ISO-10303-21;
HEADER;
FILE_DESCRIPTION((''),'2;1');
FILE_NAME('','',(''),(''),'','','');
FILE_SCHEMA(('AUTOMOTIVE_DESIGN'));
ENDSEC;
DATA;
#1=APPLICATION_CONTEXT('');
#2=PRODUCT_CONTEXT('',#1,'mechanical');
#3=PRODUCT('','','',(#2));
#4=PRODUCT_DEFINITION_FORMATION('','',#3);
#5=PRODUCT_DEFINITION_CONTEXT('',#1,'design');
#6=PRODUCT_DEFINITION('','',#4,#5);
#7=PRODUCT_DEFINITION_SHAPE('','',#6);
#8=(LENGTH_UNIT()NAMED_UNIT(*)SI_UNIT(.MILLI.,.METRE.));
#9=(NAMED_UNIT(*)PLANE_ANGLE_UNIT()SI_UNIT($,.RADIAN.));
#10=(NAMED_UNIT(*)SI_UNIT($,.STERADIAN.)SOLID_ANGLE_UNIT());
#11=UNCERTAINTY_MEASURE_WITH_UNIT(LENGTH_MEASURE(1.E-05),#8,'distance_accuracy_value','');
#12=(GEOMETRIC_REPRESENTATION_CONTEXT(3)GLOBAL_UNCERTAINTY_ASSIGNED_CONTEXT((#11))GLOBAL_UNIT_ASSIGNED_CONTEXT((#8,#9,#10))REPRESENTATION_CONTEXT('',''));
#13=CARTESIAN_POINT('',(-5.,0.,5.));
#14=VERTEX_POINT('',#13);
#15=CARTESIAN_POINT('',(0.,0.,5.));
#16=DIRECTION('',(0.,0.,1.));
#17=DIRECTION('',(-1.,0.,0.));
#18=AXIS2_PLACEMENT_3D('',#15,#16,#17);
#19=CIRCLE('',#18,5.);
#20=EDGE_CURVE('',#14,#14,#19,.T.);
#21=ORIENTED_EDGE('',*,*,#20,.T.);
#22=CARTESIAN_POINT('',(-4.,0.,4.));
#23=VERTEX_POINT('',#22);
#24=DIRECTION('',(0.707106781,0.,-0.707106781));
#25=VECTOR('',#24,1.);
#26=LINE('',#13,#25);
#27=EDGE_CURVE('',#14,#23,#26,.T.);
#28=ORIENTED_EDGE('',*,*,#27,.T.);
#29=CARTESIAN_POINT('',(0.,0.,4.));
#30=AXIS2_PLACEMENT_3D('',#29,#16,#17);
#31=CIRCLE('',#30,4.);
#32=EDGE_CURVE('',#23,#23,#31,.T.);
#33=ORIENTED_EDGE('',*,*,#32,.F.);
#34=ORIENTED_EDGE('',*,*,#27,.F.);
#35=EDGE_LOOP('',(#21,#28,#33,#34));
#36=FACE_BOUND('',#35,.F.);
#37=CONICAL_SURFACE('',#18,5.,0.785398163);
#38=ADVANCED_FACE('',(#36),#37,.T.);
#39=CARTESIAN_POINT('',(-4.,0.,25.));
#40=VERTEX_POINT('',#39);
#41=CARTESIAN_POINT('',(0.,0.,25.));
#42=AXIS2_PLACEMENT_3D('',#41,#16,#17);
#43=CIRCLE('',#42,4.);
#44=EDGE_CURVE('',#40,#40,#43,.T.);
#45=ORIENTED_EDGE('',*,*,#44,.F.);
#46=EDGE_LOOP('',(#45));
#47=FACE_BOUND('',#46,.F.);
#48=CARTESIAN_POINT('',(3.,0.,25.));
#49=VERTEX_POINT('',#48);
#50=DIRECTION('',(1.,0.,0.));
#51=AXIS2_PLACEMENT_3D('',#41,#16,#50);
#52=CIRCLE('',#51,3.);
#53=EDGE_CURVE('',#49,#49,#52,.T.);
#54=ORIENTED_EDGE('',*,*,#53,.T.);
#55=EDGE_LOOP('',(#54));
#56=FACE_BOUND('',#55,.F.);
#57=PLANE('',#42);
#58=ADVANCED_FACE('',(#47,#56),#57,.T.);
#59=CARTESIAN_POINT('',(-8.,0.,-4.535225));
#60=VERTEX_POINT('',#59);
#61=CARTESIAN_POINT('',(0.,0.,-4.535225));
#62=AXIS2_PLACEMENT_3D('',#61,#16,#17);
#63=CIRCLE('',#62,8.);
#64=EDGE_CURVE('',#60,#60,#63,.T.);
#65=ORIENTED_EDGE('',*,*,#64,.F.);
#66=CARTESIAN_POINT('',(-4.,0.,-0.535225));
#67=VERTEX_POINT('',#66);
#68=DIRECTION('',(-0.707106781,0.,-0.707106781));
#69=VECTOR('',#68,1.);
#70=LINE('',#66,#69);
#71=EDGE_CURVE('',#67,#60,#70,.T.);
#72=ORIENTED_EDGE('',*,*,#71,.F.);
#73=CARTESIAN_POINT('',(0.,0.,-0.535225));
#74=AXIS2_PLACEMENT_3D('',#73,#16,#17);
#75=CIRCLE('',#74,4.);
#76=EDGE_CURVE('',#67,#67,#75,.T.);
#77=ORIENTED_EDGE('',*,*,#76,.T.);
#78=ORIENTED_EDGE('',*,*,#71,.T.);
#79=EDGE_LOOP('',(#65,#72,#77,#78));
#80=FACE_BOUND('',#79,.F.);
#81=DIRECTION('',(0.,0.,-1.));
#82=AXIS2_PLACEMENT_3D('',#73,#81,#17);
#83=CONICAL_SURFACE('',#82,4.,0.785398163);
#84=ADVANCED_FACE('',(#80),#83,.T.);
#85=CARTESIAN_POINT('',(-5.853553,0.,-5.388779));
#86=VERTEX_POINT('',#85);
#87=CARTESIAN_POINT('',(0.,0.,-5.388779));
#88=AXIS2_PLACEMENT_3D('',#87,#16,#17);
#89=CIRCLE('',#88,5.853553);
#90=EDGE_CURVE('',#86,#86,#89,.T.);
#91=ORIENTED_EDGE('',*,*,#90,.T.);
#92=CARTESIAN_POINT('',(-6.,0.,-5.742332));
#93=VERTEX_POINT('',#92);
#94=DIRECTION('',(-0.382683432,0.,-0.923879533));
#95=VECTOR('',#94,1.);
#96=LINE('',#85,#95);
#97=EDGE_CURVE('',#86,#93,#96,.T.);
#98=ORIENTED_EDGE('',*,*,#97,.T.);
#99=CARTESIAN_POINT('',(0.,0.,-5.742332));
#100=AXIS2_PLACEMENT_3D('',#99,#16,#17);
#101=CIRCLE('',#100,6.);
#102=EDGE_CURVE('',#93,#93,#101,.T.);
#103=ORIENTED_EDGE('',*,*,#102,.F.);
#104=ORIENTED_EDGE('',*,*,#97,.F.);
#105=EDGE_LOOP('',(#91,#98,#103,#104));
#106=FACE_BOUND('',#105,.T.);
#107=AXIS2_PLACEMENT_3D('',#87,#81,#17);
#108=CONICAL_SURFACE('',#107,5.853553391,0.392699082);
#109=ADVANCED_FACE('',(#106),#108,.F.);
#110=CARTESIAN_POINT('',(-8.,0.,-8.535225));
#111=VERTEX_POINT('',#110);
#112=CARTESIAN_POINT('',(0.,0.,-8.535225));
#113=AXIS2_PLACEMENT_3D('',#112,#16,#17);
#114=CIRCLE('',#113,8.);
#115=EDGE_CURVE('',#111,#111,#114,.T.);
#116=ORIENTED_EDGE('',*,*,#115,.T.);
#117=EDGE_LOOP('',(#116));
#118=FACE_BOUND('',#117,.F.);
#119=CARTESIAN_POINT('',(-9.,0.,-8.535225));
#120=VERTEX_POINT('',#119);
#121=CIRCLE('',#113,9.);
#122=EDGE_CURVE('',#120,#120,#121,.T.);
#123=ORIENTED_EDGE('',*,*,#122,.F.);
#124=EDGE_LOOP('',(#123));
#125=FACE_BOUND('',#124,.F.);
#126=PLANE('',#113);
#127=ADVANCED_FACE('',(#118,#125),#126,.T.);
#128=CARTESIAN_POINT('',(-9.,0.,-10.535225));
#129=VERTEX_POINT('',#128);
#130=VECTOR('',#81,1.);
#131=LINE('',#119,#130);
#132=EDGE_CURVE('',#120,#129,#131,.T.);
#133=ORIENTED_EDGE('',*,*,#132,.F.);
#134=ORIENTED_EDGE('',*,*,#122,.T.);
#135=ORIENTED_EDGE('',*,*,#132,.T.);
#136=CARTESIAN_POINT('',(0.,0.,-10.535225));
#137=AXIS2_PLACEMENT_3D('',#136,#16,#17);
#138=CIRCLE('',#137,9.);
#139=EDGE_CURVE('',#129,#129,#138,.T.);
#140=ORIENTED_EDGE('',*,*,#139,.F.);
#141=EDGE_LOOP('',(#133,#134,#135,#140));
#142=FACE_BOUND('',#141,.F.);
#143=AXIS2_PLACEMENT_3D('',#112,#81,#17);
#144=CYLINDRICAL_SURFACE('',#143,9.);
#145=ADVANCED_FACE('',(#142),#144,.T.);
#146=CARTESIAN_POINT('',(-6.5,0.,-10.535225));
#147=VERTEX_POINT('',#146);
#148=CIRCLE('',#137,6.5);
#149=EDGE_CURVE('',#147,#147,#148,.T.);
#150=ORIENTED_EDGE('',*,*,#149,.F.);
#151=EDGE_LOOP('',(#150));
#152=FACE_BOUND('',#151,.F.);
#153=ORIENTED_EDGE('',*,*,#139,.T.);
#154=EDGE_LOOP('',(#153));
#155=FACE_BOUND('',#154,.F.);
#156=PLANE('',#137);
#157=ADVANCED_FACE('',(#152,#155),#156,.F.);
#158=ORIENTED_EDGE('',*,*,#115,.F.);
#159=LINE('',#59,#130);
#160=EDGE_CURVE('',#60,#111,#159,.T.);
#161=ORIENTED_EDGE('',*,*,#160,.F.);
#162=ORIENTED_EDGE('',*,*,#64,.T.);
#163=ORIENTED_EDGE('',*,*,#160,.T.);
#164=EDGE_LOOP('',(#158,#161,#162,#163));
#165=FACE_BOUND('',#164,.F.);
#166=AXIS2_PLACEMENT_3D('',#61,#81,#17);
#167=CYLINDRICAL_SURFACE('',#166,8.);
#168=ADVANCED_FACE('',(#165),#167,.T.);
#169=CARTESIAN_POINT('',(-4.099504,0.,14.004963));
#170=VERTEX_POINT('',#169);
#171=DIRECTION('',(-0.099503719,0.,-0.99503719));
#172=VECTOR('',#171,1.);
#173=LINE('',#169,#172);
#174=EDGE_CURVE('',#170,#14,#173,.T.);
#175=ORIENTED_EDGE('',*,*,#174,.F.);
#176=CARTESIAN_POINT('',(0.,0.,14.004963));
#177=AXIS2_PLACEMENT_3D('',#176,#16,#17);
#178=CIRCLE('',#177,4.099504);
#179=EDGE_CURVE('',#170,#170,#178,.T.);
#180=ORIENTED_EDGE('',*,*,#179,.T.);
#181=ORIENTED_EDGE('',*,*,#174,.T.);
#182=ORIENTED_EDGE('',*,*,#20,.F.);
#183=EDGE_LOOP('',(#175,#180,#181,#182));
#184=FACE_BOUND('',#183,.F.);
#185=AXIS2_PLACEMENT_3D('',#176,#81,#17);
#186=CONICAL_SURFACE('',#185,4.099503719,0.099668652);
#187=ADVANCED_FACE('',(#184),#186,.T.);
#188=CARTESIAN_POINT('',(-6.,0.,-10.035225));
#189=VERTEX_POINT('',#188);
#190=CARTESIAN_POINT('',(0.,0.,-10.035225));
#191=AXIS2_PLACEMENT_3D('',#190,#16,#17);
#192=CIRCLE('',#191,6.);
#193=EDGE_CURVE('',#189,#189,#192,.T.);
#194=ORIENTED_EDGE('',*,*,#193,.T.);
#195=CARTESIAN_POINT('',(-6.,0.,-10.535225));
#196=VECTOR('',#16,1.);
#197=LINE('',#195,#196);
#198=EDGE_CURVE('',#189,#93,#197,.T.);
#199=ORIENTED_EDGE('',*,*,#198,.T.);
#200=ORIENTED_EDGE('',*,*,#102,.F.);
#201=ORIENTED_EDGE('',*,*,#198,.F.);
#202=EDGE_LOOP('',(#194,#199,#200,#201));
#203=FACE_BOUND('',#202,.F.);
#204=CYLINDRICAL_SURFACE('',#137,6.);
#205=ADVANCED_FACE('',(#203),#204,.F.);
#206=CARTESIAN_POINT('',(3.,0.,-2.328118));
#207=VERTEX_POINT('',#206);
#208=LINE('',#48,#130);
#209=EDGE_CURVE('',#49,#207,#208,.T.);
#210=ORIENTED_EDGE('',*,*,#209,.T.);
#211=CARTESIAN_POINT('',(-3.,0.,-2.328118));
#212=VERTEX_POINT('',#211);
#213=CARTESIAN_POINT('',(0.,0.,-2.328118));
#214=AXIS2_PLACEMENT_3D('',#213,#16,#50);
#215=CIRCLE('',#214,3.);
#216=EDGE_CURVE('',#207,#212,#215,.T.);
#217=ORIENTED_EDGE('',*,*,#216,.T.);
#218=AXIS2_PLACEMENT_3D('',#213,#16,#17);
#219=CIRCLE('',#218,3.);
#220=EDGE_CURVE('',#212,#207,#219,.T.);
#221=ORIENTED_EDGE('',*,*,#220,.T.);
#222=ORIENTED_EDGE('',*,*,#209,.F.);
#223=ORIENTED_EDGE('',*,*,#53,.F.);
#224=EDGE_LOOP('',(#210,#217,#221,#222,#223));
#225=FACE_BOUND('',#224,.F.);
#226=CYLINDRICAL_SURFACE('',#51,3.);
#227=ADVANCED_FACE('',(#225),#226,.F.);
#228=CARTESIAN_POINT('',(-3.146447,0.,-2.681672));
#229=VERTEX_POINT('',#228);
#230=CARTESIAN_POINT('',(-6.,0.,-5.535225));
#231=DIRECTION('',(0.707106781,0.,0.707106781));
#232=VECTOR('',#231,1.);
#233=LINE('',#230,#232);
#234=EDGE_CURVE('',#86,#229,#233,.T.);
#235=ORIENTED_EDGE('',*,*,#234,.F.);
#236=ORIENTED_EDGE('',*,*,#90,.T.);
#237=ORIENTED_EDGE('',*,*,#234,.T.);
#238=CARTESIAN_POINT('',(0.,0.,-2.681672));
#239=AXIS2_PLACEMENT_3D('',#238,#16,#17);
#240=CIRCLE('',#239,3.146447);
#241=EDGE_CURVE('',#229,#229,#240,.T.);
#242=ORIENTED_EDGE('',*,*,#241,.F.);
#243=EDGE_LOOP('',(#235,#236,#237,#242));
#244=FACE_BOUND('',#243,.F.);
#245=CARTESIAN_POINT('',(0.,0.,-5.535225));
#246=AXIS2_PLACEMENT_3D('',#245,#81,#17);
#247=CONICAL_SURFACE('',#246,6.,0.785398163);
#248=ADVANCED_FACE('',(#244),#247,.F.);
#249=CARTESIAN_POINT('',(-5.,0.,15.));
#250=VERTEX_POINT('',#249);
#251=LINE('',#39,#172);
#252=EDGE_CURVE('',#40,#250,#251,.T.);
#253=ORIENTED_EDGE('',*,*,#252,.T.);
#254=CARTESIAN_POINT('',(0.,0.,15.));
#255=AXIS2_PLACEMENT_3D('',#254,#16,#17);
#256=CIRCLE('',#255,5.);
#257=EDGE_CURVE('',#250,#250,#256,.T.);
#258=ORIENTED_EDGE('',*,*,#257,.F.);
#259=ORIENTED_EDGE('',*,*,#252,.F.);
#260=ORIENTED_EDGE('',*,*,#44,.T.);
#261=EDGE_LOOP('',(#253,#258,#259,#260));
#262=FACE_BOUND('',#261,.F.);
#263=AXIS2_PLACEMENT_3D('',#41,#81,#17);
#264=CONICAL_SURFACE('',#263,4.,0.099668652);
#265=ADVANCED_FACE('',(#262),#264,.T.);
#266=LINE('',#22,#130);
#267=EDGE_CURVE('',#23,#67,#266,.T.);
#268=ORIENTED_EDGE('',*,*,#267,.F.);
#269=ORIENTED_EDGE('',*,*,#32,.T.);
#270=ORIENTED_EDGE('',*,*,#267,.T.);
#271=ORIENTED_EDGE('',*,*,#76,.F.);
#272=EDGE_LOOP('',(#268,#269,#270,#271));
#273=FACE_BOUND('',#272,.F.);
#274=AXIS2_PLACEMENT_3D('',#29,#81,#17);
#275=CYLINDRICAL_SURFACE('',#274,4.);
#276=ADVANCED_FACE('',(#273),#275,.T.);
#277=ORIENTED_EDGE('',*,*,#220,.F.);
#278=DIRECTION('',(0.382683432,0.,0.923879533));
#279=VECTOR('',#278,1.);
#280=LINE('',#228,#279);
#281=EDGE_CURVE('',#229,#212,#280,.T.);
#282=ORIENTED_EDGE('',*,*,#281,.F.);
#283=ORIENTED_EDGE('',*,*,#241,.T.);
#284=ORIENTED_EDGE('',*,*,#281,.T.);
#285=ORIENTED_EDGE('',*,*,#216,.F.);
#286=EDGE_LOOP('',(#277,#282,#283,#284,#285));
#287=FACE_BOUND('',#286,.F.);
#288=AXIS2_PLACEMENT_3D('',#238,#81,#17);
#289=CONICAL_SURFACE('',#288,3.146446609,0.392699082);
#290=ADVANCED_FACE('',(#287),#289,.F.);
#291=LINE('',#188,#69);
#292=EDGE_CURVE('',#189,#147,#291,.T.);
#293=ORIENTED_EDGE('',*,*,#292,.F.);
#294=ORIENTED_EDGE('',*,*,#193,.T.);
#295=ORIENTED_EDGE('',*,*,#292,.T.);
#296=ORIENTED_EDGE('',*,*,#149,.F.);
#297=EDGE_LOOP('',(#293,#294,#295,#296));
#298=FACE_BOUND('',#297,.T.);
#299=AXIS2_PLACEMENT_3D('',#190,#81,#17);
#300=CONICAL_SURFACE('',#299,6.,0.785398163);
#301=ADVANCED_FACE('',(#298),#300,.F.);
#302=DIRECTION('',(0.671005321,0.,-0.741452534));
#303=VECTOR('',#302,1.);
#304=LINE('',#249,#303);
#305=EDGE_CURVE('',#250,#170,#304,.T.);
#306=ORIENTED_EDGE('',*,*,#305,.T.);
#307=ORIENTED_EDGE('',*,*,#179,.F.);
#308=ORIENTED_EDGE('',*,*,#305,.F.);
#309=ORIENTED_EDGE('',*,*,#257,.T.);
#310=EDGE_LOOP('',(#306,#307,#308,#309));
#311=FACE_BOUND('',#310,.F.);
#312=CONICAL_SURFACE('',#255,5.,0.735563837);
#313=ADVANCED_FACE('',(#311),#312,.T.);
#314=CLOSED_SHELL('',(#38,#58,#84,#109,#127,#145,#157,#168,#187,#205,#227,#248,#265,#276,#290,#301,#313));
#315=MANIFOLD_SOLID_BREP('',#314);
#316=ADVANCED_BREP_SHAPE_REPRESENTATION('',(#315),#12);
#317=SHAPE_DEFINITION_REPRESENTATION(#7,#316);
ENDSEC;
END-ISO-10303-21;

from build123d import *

# Parameters (mm, degrees)
F2_R        = 3
F3_DEPTH    = 35.5362252722
F4_T4_ANGLE = 180
F4_T6_ANGLE = 180


# Not quite as in the source:
# - a fillet or chamfer that OpenCascade refuses, or shapes differently, is made with other operations: its cross-section is extruded or revolved along the edge and cut away or added
# - a feature names something its author has since deleted; it is built from what else it names


with BuildPart() as f1:
    # F0 (on Front) → F1 (revolve)
    with BuildSketch(Plane.XZ):
        Polygon((-6, -5.5352252722), (0, 0.4647747278), (0, 25), (-4, 25), (-5, 15), (-4.099503719, 14.0049628098), (-5, 5), (-4, 4), (-4, -0.5352252722), (-8, -4.5352252722), (-8, -8.5352252722), (-9, -8.5352252722), (-9, -10.5352252722), (-6, -10.5352252722), align=None)
    revolve(axis=Axis((0, 0, 12.7323873639), (0, 0, 1)))

    # F2 (on face) → F3 (cut, through all)
    with BuildSketch(Plane.XY.offset(25)):
        Circle(F2_R)
    extrude(amount=-F3_DEPTH, mode=Mode.SUBTRACT)

    # F4: chamfer of 0.5 on 4 edges, made by hand

    # F4_s1 → F4_t2 (revolve)
    with BuildSketch(Plane.XZ):
        Polygon((-5.8535533906, -5.3887786628), (-6, -5.7423320534), (-6, -5.5352252722), align=None)
    revolve(axis=Axis((0, 0, -5.5352252722), (0, 0, 1)))

    # F4_s3 → F4_t4 (revolve, cut)
    with BuildSketch(Plane.XZ):
        Polygon((-3.1464466094, -2.6816718816), (-3, -2.328118491), (-3, -2.5352252722), align=None)
    revolve(axis=Axis((0, 0, -2.5352252722), (0, 0, 1)), revolution_arc=F4_T4_ANGLE, mode=Mode.SUBTRACT)

    # F4_s5 → F4_t6 (revolve, cut)
    with BuildSketch(Plane.XZ):
        Polygon((3.1464466094, -2.6816718816), (3, -2.328118491), (3, -2.5352252722), align=None)
    revolve(axis=Axis((0, 0, -2.5352252722), (0, 0, 1)), revolution_arc=F4_T6_ANGLE, mode=Mode.SUBTRACT)

    # F4_s7 → F4_t8 (revolve, cut)
    with BuildSketch(Plane.XZ):
        Polygon((-6, -10.0352252722), (-6.5, -10.5352252722), (-6, -10.5352252722), align=None)
    revolve(axis=Axis((0, 0, -10.5352252722), (0, 0, 1)), mode=Mode.SUBTRACT)


solid = f1.part
